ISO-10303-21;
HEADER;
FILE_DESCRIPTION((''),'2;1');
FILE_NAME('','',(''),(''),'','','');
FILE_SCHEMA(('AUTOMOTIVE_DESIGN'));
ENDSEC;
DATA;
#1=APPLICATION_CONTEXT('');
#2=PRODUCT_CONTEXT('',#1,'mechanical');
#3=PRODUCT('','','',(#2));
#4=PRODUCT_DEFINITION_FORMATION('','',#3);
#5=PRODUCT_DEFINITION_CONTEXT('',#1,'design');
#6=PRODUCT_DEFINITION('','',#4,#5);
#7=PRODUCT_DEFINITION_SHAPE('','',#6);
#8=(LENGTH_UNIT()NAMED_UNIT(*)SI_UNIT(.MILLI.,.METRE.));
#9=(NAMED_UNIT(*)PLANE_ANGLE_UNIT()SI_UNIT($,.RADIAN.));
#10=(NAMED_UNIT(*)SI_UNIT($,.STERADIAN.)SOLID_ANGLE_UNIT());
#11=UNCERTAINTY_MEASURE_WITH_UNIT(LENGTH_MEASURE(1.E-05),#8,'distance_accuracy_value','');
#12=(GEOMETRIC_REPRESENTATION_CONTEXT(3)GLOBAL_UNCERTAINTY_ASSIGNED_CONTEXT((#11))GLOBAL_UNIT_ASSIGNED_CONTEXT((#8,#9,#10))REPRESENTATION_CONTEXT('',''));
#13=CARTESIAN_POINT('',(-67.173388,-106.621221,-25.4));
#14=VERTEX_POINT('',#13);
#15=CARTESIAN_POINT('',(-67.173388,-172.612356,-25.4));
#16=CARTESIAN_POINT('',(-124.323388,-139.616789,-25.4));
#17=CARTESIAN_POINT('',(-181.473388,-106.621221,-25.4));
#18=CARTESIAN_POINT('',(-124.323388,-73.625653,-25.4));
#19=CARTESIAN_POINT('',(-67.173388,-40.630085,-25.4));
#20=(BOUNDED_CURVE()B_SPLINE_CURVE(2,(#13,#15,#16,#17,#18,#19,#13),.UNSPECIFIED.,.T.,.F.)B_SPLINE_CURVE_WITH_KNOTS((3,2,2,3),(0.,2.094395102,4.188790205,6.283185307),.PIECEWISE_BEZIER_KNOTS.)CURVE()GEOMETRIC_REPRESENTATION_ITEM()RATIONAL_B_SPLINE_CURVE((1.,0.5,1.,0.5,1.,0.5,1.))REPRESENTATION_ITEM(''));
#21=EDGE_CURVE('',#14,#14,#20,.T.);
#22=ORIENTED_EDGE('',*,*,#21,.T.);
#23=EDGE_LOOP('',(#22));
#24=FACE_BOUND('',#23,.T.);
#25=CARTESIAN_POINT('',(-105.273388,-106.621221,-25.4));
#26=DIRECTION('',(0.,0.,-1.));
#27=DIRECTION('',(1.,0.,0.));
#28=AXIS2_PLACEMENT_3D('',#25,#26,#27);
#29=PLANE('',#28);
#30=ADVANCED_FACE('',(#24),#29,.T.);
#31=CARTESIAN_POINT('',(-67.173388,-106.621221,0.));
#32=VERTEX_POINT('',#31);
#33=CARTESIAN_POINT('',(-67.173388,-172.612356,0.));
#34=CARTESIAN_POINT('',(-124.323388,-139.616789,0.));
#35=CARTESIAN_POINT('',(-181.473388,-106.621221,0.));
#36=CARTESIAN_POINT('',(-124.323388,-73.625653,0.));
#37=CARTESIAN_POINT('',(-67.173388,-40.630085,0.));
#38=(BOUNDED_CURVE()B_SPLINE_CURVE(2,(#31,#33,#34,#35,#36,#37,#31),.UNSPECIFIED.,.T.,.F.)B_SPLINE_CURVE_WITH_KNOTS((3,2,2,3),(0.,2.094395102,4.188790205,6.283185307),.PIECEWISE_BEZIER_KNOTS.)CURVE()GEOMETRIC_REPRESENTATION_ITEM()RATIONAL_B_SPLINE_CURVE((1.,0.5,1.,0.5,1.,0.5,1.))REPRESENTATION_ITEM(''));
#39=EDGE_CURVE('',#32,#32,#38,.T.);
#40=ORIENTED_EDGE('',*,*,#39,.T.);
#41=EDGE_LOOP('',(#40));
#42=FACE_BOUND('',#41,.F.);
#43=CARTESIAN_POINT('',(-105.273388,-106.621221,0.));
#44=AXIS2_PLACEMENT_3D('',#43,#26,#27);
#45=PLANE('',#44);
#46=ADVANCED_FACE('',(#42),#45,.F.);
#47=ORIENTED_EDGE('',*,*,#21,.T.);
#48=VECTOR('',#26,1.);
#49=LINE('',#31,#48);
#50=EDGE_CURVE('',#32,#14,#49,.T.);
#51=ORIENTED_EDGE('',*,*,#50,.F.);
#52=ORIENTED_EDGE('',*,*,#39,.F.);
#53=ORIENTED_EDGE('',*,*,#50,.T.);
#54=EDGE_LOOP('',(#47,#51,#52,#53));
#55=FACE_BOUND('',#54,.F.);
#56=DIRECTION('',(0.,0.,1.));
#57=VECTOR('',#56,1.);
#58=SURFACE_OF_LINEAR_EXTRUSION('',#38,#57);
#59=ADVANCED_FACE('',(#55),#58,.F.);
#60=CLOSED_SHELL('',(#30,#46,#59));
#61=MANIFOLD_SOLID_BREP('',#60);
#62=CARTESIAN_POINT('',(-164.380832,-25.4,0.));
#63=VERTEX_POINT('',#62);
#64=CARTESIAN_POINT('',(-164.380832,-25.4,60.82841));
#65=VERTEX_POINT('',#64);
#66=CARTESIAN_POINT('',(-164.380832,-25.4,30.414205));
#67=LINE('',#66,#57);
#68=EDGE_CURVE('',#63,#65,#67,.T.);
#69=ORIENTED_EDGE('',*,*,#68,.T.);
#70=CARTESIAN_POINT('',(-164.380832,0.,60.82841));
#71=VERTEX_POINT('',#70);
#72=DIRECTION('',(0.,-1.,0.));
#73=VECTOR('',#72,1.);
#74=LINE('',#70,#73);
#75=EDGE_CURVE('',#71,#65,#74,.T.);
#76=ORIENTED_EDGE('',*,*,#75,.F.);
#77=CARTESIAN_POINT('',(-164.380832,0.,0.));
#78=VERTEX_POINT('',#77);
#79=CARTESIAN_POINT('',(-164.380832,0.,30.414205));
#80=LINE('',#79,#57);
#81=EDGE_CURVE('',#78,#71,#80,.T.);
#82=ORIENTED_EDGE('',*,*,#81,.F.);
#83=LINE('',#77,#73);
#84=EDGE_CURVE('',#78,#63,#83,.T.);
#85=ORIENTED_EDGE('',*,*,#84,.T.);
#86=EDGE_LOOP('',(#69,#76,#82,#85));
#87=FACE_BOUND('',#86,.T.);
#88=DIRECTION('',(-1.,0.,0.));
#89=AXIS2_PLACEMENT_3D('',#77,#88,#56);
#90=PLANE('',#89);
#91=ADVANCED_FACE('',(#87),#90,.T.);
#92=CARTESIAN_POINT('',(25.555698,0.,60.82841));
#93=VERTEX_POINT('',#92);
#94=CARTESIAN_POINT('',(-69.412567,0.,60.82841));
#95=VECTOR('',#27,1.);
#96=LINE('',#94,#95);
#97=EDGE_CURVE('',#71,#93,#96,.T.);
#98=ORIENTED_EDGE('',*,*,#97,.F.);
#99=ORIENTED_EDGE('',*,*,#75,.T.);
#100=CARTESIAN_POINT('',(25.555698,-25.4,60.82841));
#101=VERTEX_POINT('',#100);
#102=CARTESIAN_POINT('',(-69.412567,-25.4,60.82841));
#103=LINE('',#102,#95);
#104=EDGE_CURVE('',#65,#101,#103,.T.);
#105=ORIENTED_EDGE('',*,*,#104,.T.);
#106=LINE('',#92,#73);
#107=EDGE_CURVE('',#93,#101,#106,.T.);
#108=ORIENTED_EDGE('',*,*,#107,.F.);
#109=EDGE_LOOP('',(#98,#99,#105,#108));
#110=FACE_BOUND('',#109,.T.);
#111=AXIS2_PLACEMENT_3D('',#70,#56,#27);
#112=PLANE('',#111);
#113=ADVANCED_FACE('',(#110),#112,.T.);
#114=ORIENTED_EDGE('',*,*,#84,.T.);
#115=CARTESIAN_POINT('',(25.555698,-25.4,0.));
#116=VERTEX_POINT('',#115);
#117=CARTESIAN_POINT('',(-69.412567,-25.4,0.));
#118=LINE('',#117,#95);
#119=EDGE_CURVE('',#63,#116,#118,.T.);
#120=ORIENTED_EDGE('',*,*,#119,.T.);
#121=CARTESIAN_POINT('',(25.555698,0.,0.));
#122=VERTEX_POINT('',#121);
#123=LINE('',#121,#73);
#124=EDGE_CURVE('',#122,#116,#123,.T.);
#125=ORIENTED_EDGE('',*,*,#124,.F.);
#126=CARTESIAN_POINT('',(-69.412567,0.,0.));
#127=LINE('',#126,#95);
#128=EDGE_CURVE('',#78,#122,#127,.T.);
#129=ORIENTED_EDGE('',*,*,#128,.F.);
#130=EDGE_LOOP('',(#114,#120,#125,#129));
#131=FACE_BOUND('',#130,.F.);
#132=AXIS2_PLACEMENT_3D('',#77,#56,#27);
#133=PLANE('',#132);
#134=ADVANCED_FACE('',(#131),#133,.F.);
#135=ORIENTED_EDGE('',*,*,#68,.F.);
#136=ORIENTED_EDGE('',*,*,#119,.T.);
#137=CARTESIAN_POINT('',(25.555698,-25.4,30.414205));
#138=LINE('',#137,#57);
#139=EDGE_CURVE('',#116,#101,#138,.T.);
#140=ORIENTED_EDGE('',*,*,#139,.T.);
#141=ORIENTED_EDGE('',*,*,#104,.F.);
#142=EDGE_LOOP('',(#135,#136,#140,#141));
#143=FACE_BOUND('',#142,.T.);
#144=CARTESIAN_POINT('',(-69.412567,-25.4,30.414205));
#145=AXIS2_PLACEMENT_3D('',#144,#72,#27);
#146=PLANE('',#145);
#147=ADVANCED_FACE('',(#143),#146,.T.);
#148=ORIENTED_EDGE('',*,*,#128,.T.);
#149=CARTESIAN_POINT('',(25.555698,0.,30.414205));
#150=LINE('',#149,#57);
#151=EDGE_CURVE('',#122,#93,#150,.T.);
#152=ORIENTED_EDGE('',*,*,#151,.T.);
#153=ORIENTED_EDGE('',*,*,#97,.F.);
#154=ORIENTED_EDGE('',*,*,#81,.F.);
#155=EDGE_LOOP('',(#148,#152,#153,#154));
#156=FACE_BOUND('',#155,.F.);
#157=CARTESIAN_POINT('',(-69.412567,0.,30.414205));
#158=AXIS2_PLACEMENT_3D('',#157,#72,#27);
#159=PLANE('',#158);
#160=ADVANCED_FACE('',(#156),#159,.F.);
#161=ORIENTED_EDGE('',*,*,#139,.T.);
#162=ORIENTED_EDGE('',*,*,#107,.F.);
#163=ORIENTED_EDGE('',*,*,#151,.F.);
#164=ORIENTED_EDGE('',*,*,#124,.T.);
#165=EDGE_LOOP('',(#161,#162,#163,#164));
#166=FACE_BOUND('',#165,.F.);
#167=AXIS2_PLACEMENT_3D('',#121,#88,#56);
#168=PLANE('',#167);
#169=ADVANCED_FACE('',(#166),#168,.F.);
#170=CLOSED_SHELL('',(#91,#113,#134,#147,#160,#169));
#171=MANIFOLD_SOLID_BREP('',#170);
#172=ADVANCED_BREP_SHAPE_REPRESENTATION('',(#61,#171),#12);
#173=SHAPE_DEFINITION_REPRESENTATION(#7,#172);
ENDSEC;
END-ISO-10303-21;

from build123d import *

# Parameters (mm, degrees)
F0_W     = 189.936529845
F0_H     = 60.828410089
F1_DEPTH = 25.4
F5_DEPTH = 25.4


# Not quite as in the source:
# - the program builds the solid bodies; features that only make, move or delete a surface that nothing else refers to are left out


with BuildPart() as f1:
    # F0 (on Front) → F1 (new body)
    with BuildSketch(Plane.XZ):
        with Locations((-69.4125667214, 30.4142050445)):
            Rectangle(F0_W, F0_H)
    extrude(amount=F1_DEPTH)


with BuildPart() as f5:
    # F4 (on face) → F5 (new body)
    with BuildSketch(Plane(origin=(0, 0, 0), x_dir=(1, 0, 0), z_dir=(0, 0, -1))):
        with BuildLine():
            add(Edge.make_bspline(
                [(-67.1733883262, 106.6212207079), (-67.1733883262, 172.6123564763), (-124.3233883262, 139.6167885921), (-181.4733883262, 106.6212207079), (-124.3233883262, 73.6256528237), (-67.1733883262, 40.6300849395), (-67.1733883262, 106.6212207079)],
                knots=[0, 0, 0, 2.0943951024, 2.0943951024, 4.1887902048, 4.1887902048, 6.2831853072, 6.2831853072, 6.2831853072], degree=2, weights=[1, 0.5, 1, 0.5, 1, 0.5, 1]))
        make_face()
    extrude(amount=F5_DEPTH)


solid = Compound([f1.part, f5.part])
